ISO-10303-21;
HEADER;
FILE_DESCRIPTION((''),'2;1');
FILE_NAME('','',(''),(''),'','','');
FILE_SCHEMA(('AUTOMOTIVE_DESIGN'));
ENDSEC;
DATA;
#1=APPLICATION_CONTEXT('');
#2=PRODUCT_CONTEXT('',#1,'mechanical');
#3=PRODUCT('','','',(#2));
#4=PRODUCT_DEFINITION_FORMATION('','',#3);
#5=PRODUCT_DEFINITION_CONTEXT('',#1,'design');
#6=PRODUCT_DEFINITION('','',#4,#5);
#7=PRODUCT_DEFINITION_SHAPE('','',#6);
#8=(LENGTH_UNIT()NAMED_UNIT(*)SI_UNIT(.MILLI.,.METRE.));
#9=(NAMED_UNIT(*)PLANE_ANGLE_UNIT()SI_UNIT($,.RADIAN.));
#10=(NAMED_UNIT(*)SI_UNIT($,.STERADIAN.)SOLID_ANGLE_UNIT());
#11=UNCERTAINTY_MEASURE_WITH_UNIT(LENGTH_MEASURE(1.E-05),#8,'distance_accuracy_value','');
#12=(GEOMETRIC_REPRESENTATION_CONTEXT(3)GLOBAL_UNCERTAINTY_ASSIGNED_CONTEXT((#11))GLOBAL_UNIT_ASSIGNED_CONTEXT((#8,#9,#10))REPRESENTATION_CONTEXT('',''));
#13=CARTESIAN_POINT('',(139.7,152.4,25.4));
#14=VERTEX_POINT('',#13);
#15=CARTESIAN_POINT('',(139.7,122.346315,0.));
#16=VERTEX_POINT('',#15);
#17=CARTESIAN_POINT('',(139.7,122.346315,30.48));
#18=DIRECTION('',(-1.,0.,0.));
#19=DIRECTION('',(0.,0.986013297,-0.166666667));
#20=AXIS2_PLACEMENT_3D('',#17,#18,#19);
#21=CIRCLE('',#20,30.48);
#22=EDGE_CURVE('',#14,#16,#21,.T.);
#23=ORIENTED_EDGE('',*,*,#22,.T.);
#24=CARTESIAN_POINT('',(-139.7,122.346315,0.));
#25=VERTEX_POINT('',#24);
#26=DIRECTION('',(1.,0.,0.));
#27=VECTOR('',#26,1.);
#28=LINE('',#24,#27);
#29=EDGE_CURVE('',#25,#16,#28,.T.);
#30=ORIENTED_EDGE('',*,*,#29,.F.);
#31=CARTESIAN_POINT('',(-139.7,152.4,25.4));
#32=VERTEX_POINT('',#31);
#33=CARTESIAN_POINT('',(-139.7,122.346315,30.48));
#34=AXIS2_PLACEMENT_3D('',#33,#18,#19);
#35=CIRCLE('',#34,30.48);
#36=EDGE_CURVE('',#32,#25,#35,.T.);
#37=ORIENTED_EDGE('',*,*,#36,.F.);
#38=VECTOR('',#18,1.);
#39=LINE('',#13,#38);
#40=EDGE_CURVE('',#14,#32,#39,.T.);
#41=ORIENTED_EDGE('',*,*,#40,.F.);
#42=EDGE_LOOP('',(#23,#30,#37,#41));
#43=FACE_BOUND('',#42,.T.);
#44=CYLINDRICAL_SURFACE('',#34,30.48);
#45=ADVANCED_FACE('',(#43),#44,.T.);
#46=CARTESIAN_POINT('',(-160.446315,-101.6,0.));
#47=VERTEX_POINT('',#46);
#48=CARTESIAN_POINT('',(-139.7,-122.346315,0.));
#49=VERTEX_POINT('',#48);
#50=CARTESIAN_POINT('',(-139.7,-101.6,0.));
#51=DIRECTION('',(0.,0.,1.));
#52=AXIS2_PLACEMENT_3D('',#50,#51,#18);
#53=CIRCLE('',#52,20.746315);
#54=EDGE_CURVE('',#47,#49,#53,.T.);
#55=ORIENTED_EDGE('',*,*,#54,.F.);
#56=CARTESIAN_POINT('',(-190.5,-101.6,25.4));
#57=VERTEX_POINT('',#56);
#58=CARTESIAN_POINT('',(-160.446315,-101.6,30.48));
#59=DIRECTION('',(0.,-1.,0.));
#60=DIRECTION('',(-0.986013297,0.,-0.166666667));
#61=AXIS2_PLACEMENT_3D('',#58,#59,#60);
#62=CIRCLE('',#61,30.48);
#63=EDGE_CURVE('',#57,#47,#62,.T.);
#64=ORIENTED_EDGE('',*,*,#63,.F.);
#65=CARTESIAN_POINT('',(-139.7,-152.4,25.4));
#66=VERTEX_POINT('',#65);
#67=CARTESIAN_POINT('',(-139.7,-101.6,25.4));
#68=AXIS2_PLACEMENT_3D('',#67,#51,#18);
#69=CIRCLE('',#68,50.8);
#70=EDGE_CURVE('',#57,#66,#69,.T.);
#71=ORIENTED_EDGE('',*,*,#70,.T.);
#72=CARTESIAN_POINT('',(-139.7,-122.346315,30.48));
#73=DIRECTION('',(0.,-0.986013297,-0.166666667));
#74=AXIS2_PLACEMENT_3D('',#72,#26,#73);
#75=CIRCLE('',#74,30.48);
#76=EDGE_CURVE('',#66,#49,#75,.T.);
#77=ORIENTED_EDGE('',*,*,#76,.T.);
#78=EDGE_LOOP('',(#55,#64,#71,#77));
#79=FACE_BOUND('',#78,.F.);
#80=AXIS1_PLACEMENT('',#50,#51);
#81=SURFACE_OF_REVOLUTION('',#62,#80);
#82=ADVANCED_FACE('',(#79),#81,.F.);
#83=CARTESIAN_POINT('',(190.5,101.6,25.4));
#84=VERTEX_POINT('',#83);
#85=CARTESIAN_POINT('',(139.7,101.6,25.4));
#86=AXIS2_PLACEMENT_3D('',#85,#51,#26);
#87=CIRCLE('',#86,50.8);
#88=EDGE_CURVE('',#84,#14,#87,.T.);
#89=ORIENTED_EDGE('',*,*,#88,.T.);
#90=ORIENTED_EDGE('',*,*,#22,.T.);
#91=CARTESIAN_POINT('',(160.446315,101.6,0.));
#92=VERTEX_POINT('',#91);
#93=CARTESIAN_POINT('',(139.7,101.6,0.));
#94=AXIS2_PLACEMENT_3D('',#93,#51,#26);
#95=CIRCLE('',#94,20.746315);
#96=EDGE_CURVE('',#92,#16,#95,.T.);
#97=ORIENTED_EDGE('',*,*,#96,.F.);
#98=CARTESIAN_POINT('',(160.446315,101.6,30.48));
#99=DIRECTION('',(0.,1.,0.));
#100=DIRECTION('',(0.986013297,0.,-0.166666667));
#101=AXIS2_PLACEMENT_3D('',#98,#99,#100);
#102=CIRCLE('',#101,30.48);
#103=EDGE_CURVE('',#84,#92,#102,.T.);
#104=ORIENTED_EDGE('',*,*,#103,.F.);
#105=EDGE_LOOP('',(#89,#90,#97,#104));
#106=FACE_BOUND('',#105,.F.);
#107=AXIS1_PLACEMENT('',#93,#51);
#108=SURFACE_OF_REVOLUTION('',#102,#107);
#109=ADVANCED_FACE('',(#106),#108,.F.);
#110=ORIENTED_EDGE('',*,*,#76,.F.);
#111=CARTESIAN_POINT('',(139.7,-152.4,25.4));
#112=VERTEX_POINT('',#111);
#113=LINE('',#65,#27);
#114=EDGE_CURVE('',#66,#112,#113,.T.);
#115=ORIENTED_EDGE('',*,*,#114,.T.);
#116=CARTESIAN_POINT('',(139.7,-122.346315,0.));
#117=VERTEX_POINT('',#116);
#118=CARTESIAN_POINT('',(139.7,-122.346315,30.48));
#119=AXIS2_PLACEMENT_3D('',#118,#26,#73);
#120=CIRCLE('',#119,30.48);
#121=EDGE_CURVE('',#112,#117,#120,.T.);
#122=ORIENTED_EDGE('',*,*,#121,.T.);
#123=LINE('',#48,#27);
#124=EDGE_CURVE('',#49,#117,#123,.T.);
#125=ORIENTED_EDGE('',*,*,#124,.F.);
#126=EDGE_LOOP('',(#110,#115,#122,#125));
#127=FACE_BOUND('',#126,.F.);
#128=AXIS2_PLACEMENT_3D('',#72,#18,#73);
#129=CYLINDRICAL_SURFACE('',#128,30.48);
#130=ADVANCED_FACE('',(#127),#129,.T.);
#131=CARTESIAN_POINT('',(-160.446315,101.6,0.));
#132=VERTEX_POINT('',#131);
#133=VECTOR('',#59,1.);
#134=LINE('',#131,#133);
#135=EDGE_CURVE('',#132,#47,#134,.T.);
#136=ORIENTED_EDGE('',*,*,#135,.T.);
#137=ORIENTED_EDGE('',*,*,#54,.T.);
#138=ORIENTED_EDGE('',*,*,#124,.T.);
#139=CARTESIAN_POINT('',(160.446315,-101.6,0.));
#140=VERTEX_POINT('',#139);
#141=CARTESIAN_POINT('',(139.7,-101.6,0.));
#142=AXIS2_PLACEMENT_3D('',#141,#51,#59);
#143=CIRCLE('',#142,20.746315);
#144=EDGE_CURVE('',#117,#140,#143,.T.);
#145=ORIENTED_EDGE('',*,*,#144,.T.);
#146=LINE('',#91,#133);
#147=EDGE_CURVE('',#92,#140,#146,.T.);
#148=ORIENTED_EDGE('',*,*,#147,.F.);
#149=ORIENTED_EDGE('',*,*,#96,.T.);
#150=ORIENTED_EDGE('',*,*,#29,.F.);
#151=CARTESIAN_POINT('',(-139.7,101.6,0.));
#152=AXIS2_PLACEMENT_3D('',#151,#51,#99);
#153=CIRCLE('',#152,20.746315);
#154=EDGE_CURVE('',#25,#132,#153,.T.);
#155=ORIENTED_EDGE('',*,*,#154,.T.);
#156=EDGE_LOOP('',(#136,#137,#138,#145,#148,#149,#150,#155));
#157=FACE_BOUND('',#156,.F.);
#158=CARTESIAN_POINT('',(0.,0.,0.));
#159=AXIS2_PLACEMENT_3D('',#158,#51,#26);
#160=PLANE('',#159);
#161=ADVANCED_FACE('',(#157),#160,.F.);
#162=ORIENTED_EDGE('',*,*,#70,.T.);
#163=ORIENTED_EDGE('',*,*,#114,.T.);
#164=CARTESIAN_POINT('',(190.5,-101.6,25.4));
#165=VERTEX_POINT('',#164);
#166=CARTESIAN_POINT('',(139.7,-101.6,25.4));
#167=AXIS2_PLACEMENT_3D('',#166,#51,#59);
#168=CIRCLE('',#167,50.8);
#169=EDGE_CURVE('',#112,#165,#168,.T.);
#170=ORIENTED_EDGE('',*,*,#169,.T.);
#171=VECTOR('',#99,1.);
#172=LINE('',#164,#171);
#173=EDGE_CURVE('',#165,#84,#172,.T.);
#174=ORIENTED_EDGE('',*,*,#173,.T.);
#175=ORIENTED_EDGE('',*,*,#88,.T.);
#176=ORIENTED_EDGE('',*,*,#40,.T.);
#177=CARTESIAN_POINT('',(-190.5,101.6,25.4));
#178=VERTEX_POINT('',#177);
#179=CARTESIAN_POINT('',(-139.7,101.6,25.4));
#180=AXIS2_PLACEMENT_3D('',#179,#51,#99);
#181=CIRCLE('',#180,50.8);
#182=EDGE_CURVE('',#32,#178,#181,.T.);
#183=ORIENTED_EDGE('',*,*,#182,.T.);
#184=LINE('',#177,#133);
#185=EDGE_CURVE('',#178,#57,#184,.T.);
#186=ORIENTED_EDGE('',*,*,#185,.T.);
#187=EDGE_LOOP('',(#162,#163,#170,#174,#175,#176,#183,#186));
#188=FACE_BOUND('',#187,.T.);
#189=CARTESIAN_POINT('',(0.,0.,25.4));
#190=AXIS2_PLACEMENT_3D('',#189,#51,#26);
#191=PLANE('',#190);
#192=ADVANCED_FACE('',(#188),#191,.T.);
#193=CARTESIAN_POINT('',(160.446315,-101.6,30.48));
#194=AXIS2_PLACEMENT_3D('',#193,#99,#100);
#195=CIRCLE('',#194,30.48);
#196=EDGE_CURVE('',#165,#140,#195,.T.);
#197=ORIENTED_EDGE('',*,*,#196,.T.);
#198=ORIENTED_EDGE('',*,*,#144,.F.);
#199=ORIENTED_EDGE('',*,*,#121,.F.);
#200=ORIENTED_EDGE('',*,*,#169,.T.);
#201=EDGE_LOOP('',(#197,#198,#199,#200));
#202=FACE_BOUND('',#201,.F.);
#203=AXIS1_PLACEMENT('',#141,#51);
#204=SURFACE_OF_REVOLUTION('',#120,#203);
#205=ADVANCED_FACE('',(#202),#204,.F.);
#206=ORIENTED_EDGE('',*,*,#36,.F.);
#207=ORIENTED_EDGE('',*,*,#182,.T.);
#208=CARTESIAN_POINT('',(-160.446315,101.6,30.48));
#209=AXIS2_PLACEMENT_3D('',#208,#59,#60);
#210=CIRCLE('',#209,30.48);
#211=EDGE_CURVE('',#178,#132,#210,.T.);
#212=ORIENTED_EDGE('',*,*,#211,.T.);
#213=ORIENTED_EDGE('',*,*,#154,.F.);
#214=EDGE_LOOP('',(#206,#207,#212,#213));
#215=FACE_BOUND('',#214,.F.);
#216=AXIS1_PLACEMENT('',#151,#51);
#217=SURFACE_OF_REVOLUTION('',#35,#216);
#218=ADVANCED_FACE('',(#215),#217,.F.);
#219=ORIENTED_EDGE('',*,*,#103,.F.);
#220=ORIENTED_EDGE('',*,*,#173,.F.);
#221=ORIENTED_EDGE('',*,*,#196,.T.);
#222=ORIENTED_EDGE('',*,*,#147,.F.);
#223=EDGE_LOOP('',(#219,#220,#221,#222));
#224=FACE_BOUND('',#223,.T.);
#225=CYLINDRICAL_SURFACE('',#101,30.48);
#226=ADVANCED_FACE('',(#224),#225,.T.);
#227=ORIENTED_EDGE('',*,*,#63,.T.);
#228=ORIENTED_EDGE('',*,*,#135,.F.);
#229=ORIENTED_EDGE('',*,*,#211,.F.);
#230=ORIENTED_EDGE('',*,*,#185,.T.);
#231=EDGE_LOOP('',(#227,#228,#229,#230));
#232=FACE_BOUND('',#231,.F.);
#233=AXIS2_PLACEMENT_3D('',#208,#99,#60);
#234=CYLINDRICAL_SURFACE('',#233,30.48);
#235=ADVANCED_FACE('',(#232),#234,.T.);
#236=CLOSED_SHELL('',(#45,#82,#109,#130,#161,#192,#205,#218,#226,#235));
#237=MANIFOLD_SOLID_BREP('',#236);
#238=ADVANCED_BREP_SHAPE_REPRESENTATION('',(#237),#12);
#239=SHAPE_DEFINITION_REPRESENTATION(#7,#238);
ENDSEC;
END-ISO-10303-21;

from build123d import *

# Parameters (mm, degrees)
F1_DEPTH     = 25.4
F2_T1_DEPTH  = 279.4
F2_T3_DEPTH  = 203.2
F2_T6_ANGLE  = 90
F2_T8_ANGLE  = 90
F2_T10_ANGLE = 90
F2_T12_ANGLE = 90


# Not quite as in the source:
# - a fillet or chamfer that OpenCascade refuses, or shapes differently, is made with other operations: its cross-section is extruded or revolved along the edge and cut away or added


with BuildPart() as f1:
    # F0 (on Top) → F1 (new body)
    with BuildSketch(Plane.XY):
        with BuildLine():
            Line((-139.7, -152.4), (139.7, -152.4))
            ThreePointArc((139.7, -152.4), (175.6210244843, -137.5210244843), (190.5, -101.6))
            Line((190.5, -101.6), (190.5, 101.6))
            ThreePointArc((190.5, 101.6), (175.6210244843, 137.5210244843), (139.7, 152.4))
            Line((139.7, 152.4), (-139.7, 152.4))
            ThreePointArc((-139.7, 152.4), (-175.6210244843, 137.5210244843), (-190.5, 101.6))
            Line((-190.5, 101.6), (-190.5, -101.6))
            ThreePointArc((-190.5, -101.6), (-175.6210244843, -137.5210244843), (-139.7, -152.4))
        make_face()
    extrude(amount=F1_DEPTH)

    # F2: fillet of radius 30.48 on 1 edges, made by hand

    # F2_s2 → F2_t1 (cut)
    with BuildSketch(Plane.YZ.offset(-139.7)):
        with BuildLine():
            ThreePointArc((-152.4, 25.4), (-142.0210701006, 7.2005154696), (-122.3463147019, 0))
            Line((-122.3463147019, 0), (-152.4, 0))
            Line((-152.4, 0), (-152.4, 25.4))
        make_face()
        with BuildLine():
            ThreePointArc((152.4, 25.4), (142.0210701006, 7.2005154696), (122.3463147019, 0))
            Line((122.3463147019, 0), (152.4, 0))
            Line((152.4, 0), (152.4, 25.4))
        make_face()
    extrude(amount=F2_T1_DEPTH, mode=Mode.SUBTRACT)

    # F2_s4 → F2_t3 (cut)
    with BuildSketch(Plane.XZ.offset(-101.6)):
        with BuildLine():
            ThreePointArc((190.5, 25.4), (180.1210701006, 7.2005154696), (160.4463147019, 0))
            Line((160.4463147019, 0), (190.5, 0))
            Line((190.5, 0), (190.5, 25.4))
        make_face()
        with BuildLine():
            ThreePointArc((-190.5, 25.4), (-180.1210701006, 7.2005154696), (-160.4463147019, 0))
            Line((-160.4463147019, 0), (-190.5, 0))
            Line((-190.5, 0), (-190.5, 25.4))
        make_face()
    extrude(amount=F2_T3_DEPTH, mode=Mode.SUBTRACT)

    # F2_s5 → F2_t6 (revolve, cut)
    with BuildSketch(Plane.XZ.offset(101.6)):
        with BuildLine():
            ThreePointArc((-190.5, 25.4), (-180.1210701006, 7.2005154696), (-160.4463147019, 0))
            Line((-160.4463147019, 0), (-190.5, 0))
            Line((-190.5, 0), (-190.5, 25.4))
        make_face()
    revolve(axis=Axis((-139.7, -101.6, 0), (0, 0, 1)), revolution_arc=F2_T6_ANGLE, mode=Mode.SUBTRACT)

    # F2_s7 → F2_t8 (revolve, cut)
    with BuildSketch(Plane.YZ.offset(139.7)):
        with BuildLine():
            ThreePointArc((-152.4, 25.4), (-142.0210701006, 7.2005154696), (-122.3463147019, 0))
            Line((-122.3463147019, 0), (-152.4, 0))
            Line((-152.4, 0), (-152.4, 25.4))
        make_face()
    revolve(axis=Axis((139.7, -101.6, 0), (0, 0, 1)), revolution_arc=F2_T8_ANGLE, mode=Mode.SUBTRACT)

    # F2_s9 → F2_t10 (revolve, cut)
    with BuildSketch(Plane.XZ.offset(-101.6)):
        with BuildLine():
            ThreePointArc((190.5, 25.4), (180.1210701006, 7.2005154696), (160.4463147019, 0))
            Line((160.4463147019, 0), (190.5, 0))
            Line((190.5, 0), (190.5, 25.4))
        make_face()
    revolve(axis=Axis((139.7, 101.6, 0), (0, 0, 1)), revolution_arc=F2_T10_ANGLE, mode=Mode.SUBTRACT)

    # F2_s11 → F2_t12 (revolve, cut)
    with BuildSketch(Plane.YZ.offset(-139.7)):
        with BuildLine():
            ThreePointArc((152.4, 25.4), (142.0210701006, 7.2005154696), (122.3463147019, 0))
            Line((122.3463147019, 0), (152.4, 0))
            Line((152.4, 0), (152.4, 25.4))
        make_face()
    revolve(axis=Axis((-139.7, 101.6, 0), (0, 0, 1)), revolution_arc=F2_T12_ANGLE, mode=Mode.SUBTRACT)


solid = f1.part
